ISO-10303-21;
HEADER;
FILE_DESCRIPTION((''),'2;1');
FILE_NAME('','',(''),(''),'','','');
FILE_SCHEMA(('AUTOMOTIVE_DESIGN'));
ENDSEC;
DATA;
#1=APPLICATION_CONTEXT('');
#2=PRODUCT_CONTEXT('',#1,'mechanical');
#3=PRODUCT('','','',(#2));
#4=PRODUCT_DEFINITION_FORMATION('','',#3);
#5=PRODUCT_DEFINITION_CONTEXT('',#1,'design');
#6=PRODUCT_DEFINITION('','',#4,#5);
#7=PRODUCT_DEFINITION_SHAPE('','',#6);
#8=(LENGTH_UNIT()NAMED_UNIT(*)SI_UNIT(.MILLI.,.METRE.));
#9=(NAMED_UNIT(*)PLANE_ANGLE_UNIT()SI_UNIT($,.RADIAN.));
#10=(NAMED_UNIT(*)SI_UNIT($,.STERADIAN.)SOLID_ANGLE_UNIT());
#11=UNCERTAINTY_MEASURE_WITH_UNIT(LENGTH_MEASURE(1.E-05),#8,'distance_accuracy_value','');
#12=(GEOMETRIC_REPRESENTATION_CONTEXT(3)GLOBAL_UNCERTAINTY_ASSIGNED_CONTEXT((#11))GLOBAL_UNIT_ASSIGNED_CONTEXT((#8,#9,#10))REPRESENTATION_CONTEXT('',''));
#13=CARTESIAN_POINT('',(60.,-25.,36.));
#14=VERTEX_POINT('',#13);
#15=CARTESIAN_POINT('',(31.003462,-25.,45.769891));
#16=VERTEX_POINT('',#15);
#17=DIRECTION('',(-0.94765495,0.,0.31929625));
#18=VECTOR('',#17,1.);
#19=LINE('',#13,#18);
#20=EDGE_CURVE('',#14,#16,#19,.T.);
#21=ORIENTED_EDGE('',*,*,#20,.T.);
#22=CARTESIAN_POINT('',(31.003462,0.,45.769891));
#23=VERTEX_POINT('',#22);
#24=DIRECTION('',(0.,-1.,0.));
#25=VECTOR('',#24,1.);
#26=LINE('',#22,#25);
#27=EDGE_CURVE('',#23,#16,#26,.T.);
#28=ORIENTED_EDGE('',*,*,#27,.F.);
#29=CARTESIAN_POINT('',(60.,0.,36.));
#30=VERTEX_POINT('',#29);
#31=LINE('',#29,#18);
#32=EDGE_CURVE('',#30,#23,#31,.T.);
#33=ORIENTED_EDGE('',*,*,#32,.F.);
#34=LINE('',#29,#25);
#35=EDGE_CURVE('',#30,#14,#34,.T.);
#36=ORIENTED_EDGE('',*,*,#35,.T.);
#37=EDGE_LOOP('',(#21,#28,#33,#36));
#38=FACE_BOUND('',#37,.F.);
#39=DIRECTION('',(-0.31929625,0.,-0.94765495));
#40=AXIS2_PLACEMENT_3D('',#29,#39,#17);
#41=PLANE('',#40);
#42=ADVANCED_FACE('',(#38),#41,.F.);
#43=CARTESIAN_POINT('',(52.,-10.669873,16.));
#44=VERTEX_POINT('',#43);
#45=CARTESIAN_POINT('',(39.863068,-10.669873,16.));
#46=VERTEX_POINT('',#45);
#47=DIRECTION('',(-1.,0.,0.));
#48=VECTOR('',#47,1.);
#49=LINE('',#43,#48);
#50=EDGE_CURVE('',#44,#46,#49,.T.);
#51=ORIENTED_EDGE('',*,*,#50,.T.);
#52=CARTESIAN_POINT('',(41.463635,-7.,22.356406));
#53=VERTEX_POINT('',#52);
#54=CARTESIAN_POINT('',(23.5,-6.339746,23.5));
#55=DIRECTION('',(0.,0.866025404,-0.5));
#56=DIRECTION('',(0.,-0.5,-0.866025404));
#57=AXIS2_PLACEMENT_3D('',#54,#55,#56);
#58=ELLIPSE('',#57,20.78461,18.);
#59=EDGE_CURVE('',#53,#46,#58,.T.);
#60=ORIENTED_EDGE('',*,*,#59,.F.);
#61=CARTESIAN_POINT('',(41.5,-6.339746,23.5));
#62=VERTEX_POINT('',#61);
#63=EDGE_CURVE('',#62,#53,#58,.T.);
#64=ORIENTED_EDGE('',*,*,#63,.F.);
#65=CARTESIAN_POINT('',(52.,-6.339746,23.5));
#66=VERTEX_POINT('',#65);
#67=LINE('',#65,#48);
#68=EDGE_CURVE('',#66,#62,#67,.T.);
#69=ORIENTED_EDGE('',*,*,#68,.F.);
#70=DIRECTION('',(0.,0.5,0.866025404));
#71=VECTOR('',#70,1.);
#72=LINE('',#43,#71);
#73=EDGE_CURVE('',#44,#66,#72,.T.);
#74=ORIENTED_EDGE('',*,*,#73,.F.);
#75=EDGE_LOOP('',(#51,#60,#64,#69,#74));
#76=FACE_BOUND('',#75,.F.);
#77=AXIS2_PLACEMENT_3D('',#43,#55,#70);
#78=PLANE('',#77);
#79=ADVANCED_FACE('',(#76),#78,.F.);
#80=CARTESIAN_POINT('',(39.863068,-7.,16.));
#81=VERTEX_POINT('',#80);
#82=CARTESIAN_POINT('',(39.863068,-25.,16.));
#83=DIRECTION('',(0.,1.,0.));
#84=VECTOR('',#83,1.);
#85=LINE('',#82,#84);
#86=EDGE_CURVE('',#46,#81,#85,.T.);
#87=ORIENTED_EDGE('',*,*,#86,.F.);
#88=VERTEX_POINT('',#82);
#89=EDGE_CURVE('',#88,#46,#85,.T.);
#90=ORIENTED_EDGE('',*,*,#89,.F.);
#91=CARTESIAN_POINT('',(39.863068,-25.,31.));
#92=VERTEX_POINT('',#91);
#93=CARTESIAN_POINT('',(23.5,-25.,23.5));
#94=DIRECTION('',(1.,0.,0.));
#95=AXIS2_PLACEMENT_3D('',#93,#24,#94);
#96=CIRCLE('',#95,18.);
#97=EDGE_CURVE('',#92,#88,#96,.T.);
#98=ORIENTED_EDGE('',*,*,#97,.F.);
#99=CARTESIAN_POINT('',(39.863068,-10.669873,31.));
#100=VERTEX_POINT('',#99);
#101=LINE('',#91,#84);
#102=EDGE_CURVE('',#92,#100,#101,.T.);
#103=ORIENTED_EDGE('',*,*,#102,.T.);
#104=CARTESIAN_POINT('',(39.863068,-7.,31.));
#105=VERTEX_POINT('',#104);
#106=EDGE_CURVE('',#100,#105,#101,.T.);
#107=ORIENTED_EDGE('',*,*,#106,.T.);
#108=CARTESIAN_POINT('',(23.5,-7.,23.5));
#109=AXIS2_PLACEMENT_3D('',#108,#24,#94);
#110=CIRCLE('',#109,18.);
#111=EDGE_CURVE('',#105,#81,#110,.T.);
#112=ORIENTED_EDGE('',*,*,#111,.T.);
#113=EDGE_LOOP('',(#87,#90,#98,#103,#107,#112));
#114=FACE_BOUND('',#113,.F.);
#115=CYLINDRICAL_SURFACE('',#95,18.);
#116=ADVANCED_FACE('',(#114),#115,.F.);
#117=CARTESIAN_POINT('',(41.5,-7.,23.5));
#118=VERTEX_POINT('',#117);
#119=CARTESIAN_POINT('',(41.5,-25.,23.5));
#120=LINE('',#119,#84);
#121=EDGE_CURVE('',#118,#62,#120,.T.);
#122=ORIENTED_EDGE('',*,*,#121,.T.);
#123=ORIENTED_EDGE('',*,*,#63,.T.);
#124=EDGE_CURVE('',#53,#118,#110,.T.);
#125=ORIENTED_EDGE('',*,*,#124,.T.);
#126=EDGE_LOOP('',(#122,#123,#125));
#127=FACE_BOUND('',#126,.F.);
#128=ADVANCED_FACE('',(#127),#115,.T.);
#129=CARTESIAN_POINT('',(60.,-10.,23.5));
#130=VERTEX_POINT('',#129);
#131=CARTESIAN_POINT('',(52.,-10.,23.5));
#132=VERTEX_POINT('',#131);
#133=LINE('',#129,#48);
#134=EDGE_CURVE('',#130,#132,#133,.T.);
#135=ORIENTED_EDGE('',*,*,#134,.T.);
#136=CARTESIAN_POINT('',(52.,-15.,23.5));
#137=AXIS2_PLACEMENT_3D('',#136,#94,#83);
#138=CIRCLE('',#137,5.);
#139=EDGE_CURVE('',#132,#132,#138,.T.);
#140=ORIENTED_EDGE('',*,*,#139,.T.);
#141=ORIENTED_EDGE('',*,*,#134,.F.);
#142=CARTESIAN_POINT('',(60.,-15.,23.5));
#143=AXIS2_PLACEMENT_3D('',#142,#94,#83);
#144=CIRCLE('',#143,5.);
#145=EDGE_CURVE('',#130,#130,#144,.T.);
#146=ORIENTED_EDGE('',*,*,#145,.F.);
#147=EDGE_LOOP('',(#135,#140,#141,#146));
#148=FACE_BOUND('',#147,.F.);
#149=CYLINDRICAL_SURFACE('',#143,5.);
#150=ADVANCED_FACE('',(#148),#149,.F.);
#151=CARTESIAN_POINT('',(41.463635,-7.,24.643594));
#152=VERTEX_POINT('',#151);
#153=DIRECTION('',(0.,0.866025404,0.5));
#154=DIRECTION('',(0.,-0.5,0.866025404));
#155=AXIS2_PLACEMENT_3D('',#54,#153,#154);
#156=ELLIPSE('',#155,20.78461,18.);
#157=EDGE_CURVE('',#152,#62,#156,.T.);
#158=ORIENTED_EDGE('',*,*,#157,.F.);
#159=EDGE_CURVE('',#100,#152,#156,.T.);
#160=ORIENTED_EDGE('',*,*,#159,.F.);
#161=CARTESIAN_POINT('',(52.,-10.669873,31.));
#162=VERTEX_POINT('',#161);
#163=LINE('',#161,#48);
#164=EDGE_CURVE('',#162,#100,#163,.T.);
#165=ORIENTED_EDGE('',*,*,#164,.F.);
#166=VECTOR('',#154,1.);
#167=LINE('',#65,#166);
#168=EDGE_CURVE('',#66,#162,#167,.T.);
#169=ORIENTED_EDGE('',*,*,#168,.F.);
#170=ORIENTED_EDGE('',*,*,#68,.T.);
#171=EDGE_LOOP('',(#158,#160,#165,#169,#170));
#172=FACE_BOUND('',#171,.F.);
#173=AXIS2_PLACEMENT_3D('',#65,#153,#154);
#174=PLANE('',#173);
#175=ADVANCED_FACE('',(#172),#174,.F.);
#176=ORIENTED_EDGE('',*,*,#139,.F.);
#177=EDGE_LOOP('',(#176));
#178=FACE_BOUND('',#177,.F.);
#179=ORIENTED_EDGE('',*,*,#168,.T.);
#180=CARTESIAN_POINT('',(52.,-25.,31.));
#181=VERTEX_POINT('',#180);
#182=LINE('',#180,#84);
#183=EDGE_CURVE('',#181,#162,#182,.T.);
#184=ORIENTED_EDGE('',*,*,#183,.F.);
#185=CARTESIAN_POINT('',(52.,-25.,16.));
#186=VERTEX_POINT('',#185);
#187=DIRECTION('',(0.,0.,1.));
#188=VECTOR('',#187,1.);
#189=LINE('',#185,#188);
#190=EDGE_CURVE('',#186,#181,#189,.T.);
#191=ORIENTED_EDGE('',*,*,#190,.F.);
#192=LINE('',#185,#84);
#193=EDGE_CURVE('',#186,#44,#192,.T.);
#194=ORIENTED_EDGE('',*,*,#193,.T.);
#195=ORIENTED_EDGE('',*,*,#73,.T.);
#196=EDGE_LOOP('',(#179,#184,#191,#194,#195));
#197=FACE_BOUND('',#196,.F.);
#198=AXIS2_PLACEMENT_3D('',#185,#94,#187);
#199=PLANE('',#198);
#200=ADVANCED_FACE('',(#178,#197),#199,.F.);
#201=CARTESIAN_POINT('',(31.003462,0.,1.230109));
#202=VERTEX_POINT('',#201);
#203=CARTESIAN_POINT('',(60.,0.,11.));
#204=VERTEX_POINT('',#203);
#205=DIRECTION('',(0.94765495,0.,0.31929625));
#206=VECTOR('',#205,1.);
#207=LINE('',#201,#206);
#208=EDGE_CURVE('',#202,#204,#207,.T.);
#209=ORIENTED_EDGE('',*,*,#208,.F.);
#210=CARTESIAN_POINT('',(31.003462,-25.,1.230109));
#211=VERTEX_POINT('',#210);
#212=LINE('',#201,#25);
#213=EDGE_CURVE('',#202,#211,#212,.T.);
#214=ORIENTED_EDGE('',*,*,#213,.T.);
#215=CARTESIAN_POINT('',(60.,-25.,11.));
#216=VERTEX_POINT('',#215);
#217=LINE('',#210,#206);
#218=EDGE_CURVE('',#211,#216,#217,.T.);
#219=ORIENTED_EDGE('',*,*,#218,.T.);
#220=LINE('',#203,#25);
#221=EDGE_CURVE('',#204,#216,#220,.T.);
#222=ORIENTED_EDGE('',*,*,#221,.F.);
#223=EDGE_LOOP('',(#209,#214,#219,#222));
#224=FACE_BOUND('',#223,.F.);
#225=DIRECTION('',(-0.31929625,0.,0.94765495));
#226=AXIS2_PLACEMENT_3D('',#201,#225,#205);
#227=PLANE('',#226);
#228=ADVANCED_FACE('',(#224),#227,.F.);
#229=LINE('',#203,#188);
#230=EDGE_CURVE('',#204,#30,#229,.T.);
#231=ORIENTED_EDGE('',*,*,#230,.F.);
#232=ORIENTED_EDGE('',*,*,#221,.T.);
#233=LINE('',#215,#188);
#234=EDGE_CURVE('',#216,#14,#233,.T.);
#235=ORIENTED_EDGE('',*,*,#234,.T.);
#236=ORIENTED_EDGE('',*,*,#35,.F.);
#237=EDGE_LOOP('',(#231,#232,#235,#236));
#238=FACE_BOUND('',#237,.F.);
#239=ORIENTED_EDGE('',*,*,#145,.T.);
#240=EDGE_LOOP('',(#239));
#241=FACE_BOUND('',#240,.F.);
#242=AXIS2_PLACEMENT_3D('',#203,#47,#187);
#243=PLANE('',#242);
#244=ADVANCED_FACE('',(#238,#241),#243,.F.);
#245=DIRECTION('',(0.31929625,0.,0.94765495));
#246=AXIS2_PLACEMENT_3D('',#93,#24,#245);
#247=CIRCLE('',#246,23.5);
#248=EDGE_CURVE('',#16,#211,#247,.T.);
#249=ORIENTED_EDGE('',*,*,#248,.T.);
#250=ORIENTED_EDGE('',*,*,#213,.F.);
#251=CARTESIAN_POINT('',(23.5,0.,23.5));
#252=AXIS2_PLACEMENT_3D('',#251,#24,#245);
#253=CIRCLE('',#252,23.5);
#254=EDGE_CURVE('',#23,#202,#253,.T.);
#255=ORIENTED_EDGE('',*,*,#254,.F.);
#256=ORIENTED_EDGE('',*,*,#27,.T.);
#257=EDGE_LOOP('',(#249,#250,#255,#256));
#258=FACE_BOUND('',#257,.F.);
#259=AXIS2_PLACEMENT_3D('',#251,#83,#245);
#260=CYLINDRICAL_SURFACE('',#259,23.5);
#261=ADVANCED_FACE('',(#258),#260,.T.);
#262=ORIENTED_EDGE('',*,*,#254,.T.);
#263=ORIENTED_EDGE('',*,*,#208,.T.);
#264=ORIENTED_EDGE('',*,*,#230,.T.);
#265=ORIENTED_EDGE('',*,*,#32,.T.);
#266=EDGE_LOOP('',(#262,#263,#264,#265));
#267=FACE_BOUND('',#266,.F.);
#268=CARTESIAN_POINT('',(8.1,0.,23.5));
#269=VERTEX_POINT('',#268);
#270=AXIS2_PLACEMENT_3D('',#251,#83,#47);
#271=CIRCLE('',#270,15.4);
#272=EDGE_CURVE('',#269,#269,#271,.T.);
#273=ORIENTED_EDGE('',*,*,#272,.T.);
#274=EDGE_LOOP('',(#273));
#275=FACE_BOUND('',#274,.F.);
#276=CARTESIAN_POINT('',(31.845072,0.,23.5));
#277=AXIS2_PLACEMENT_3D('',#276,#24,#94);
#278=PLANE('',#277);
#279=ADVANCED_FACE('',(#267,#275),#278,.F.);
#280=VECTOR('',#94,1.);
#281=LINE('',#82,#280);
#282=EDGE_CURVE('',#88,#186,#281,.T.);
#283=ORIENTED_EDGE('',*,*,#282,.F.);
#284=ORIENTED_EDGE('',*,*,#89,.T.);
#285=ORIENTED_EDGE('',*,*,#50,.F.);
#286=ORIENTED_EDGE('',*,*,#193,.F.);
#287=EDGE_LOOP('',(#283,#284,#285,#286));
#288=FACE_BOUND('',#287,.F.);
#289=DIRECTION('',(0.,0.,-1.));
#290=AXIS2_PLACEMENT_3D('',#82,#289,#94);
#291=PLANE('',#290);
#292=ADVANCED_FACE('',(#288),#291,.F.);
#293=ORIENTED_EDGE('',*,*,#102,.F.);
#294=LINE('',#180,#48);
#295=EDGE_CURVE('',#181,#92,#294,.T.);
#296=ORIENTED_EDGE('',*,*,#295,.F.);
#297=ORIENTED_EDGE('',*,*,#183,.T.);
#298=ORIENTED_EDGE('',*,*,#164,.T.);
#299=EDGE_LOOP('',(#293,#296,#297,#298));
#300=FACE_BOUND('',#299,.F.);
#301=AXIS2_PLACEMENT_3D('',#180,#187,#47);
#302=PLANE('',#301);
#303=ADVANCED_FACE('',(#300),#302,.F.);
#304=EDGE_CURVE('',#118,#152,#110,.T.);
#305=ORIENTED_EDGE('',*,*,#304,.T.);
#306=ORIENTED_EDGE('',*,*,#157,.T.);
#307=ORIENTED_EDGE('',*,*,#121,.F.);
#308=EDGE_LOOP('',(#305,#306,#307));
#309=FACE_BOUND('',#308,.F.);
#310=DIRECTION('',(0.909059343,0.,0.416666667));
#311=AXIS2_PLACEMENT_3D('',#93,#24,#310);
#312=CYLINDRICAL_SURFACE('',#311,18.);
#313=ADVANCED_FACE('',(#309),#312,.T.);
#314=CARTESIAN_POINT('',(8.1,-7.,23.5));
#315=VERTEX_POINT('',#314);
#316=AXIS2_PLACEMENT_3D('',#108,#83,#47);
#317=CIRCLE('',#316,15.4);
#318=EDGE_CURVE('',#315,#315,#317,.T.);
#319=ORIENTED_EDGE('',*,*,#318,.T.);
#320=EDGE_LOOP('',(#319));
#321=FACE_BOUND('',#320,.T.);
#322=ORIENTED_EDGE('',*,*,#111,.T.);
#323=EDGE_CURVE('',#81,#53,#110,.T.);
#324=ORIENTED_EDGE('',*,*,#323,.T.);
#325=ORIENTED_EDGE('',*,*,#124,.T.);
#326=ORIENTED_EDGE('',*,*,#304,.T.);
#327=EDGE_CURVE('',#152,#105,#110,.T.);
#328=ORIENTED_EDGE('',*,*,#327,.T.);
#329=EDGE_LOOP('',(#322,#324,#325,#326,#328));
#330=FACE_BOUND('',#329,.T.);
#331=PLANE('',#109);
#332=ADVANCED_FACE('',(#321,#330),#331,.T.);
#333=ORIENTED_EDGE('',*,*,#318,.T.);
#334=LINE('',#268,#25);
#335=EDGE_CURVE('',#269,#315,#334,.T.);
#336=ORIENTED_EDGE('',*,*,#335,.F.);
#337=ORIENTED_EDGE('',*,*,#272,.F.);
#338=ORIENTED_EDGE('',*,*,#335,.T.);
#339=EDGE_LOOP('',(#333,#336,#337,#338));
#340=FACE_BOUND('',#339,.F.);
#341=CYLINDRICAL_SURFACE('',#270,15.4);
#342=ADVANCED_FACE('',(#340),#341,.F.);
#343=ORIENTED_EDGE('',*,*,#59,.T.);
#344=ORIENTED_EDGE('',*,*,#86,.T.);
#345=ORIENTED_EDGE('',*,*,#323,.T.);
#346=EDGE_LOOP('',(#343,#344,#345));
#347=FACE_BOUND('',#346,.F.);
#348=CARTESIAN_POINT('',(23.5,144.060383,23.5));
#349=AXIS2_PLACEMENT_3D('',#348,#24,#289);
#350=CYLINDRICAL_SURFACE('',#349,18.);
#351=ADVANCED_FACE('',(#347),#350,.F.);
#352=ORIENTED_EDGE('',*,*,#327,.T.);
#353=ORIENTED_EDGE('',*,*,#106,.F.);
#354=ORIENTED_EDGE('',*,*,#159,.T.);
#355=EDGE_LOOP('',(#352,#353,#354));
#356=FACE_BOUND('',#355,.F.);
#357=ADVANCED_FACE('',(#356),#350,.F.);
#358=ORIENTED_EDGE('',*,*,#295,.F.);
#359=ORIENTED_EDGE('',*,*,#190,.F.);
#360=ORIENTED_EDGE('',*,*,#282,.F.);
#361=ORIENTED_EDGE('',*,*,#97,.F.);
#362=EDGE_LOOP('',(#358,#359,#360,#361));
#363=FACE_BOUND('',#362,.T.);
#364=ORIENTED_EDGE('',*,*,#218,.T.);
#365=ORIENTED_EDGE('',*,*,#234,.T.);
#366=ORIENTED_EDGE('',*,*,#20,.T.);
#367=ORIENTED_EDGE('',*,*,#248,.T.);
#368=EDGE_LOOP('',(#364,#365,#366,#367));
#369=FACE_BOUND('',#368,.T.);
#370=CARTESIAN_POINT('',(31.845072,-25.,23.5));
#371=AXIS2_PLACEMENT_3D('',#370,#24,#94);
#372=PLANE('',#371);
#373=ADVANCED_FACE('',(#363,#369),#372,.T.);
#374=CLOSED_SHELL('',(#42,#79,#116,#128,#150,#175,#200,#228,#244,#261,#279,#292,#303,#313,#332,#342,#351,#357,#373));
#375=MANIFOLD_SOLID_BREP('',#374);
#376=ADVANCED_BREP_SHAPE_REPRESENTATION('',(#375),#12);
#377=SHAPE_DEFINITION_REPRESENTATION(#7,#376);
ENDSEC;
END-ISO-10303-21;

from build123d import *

# Parameters (mm, degrees)
F1_DEPTH       = 25
F2_R           = 18
F3_DEPTH       = 18
F4_R           = 15.4
F5_DEPTH       = 7
F6_R           = 5
F7_DEPTH       = 25
F9_DEPTH       = 22
F11_END_RADIUS = 18
F11_REACH      = 68.8481644957


with BuildPart() as f1:
    # F0 (on Front) → F1 (new body)
    with BuildSketch(Plane.XZ):
        with BuildLine():
            Line((60, 11), (60, 23.5))
            Line((60, 23.5), (60, 36))
            Line((60, 36), (31.0034618727, 45.7698913317))
            ThreePointArc((31.0034618727, 45.7698913317), (0, 23.5), (31.0034618727, 1.2301086683))
            Line((31.0034618727, 1.2301086683), (60, 11))
        make_face()
    extrude(amount=F1_DEPTH)

    # F2 (on face) → F3 (cut)
    with BuildSketch(Plane.XZ.offset(25)):
        with Locations((23.5, 23.5)):
            Circle(F2_R)
    extrude(amount=-F3_DEPTH, mode=Mode.SUBTRACT)

    # F4 (on face) → F5 (cut)
    with BuildSketch(Plane(origin=(0, 0, 0), x_dir=(-1, 0, 0), z_dir=(0, 1, 0))):
        with Locations((-23.5, 23.5)):
            Circle(F4_R)
    extrude(amount=-F5_DEPTH, mode=Mode.SUBTRACT)

    # F6 (on face) → F7 (cut)
    with BuildSketch(Plane.YZ.offset(60)):
        with Locations((-15, 23.5)):
            Circle(F6_R)
    extrude(amount=-F7_DEPTH, mode=Mode.SUBTRACT)

    # F8 (on face) → F9 (cut)
    with BuildSketch(Plane.XZ.offset(25)):
        with BuildLine():
            Line((52, 16), (52, 23.5))
            Line((52, 23.5), (52, 31))
            Line((52, 31), (39.863068172, 31))
            ThreePointArc((39.863068172, 31), (41.0860061852, 27.3382791004), (41.5, 23.5))
            ThreePointArc((41.5, 23.5), (41.0860061852, 19.6617208996), (39.863068172, 16))
            Line((39.863068172, 16), (52, 16))
        make_face()
    extrude(amount=-F9_DEPTH, mode=Mode.SUBTRACT)

    f11_end = (Plane(origin=(23.5, -5, 23.5), x_dir=(0, 0, -1), z_dir=(0, -1, 0)) * Cylinder(F11_END_RADIUS, 298.1207660327, mode=Mode.PRIVATE)).faces().sort_by_distance((41.5, -5, 23.5))[0]
    # F10 (on face) → F11 (join, up to the whole of a round face its end follows)
    with BuildSketch(Plane(origin=(52, 0, 0), x_dir=(0, -1, 0), z_dir=(-1, 0, 0))):
        Polygon((3, 16), (10.6698729811, 16), (6.3397459622, 23.5), (10.6698729811, 31), (3, 31), align=None)
    f11_long = extrude(amount=F11_REACH, mode=Mode.PRIVATE)
    add(split(f11_long, bisect_by=f11_end, keep=Keep.ALL, mode=Mode.PRIVATE).solids().sort_by_distance((52, -5.8943260873, 23.5))[0])


solid = f1.part
